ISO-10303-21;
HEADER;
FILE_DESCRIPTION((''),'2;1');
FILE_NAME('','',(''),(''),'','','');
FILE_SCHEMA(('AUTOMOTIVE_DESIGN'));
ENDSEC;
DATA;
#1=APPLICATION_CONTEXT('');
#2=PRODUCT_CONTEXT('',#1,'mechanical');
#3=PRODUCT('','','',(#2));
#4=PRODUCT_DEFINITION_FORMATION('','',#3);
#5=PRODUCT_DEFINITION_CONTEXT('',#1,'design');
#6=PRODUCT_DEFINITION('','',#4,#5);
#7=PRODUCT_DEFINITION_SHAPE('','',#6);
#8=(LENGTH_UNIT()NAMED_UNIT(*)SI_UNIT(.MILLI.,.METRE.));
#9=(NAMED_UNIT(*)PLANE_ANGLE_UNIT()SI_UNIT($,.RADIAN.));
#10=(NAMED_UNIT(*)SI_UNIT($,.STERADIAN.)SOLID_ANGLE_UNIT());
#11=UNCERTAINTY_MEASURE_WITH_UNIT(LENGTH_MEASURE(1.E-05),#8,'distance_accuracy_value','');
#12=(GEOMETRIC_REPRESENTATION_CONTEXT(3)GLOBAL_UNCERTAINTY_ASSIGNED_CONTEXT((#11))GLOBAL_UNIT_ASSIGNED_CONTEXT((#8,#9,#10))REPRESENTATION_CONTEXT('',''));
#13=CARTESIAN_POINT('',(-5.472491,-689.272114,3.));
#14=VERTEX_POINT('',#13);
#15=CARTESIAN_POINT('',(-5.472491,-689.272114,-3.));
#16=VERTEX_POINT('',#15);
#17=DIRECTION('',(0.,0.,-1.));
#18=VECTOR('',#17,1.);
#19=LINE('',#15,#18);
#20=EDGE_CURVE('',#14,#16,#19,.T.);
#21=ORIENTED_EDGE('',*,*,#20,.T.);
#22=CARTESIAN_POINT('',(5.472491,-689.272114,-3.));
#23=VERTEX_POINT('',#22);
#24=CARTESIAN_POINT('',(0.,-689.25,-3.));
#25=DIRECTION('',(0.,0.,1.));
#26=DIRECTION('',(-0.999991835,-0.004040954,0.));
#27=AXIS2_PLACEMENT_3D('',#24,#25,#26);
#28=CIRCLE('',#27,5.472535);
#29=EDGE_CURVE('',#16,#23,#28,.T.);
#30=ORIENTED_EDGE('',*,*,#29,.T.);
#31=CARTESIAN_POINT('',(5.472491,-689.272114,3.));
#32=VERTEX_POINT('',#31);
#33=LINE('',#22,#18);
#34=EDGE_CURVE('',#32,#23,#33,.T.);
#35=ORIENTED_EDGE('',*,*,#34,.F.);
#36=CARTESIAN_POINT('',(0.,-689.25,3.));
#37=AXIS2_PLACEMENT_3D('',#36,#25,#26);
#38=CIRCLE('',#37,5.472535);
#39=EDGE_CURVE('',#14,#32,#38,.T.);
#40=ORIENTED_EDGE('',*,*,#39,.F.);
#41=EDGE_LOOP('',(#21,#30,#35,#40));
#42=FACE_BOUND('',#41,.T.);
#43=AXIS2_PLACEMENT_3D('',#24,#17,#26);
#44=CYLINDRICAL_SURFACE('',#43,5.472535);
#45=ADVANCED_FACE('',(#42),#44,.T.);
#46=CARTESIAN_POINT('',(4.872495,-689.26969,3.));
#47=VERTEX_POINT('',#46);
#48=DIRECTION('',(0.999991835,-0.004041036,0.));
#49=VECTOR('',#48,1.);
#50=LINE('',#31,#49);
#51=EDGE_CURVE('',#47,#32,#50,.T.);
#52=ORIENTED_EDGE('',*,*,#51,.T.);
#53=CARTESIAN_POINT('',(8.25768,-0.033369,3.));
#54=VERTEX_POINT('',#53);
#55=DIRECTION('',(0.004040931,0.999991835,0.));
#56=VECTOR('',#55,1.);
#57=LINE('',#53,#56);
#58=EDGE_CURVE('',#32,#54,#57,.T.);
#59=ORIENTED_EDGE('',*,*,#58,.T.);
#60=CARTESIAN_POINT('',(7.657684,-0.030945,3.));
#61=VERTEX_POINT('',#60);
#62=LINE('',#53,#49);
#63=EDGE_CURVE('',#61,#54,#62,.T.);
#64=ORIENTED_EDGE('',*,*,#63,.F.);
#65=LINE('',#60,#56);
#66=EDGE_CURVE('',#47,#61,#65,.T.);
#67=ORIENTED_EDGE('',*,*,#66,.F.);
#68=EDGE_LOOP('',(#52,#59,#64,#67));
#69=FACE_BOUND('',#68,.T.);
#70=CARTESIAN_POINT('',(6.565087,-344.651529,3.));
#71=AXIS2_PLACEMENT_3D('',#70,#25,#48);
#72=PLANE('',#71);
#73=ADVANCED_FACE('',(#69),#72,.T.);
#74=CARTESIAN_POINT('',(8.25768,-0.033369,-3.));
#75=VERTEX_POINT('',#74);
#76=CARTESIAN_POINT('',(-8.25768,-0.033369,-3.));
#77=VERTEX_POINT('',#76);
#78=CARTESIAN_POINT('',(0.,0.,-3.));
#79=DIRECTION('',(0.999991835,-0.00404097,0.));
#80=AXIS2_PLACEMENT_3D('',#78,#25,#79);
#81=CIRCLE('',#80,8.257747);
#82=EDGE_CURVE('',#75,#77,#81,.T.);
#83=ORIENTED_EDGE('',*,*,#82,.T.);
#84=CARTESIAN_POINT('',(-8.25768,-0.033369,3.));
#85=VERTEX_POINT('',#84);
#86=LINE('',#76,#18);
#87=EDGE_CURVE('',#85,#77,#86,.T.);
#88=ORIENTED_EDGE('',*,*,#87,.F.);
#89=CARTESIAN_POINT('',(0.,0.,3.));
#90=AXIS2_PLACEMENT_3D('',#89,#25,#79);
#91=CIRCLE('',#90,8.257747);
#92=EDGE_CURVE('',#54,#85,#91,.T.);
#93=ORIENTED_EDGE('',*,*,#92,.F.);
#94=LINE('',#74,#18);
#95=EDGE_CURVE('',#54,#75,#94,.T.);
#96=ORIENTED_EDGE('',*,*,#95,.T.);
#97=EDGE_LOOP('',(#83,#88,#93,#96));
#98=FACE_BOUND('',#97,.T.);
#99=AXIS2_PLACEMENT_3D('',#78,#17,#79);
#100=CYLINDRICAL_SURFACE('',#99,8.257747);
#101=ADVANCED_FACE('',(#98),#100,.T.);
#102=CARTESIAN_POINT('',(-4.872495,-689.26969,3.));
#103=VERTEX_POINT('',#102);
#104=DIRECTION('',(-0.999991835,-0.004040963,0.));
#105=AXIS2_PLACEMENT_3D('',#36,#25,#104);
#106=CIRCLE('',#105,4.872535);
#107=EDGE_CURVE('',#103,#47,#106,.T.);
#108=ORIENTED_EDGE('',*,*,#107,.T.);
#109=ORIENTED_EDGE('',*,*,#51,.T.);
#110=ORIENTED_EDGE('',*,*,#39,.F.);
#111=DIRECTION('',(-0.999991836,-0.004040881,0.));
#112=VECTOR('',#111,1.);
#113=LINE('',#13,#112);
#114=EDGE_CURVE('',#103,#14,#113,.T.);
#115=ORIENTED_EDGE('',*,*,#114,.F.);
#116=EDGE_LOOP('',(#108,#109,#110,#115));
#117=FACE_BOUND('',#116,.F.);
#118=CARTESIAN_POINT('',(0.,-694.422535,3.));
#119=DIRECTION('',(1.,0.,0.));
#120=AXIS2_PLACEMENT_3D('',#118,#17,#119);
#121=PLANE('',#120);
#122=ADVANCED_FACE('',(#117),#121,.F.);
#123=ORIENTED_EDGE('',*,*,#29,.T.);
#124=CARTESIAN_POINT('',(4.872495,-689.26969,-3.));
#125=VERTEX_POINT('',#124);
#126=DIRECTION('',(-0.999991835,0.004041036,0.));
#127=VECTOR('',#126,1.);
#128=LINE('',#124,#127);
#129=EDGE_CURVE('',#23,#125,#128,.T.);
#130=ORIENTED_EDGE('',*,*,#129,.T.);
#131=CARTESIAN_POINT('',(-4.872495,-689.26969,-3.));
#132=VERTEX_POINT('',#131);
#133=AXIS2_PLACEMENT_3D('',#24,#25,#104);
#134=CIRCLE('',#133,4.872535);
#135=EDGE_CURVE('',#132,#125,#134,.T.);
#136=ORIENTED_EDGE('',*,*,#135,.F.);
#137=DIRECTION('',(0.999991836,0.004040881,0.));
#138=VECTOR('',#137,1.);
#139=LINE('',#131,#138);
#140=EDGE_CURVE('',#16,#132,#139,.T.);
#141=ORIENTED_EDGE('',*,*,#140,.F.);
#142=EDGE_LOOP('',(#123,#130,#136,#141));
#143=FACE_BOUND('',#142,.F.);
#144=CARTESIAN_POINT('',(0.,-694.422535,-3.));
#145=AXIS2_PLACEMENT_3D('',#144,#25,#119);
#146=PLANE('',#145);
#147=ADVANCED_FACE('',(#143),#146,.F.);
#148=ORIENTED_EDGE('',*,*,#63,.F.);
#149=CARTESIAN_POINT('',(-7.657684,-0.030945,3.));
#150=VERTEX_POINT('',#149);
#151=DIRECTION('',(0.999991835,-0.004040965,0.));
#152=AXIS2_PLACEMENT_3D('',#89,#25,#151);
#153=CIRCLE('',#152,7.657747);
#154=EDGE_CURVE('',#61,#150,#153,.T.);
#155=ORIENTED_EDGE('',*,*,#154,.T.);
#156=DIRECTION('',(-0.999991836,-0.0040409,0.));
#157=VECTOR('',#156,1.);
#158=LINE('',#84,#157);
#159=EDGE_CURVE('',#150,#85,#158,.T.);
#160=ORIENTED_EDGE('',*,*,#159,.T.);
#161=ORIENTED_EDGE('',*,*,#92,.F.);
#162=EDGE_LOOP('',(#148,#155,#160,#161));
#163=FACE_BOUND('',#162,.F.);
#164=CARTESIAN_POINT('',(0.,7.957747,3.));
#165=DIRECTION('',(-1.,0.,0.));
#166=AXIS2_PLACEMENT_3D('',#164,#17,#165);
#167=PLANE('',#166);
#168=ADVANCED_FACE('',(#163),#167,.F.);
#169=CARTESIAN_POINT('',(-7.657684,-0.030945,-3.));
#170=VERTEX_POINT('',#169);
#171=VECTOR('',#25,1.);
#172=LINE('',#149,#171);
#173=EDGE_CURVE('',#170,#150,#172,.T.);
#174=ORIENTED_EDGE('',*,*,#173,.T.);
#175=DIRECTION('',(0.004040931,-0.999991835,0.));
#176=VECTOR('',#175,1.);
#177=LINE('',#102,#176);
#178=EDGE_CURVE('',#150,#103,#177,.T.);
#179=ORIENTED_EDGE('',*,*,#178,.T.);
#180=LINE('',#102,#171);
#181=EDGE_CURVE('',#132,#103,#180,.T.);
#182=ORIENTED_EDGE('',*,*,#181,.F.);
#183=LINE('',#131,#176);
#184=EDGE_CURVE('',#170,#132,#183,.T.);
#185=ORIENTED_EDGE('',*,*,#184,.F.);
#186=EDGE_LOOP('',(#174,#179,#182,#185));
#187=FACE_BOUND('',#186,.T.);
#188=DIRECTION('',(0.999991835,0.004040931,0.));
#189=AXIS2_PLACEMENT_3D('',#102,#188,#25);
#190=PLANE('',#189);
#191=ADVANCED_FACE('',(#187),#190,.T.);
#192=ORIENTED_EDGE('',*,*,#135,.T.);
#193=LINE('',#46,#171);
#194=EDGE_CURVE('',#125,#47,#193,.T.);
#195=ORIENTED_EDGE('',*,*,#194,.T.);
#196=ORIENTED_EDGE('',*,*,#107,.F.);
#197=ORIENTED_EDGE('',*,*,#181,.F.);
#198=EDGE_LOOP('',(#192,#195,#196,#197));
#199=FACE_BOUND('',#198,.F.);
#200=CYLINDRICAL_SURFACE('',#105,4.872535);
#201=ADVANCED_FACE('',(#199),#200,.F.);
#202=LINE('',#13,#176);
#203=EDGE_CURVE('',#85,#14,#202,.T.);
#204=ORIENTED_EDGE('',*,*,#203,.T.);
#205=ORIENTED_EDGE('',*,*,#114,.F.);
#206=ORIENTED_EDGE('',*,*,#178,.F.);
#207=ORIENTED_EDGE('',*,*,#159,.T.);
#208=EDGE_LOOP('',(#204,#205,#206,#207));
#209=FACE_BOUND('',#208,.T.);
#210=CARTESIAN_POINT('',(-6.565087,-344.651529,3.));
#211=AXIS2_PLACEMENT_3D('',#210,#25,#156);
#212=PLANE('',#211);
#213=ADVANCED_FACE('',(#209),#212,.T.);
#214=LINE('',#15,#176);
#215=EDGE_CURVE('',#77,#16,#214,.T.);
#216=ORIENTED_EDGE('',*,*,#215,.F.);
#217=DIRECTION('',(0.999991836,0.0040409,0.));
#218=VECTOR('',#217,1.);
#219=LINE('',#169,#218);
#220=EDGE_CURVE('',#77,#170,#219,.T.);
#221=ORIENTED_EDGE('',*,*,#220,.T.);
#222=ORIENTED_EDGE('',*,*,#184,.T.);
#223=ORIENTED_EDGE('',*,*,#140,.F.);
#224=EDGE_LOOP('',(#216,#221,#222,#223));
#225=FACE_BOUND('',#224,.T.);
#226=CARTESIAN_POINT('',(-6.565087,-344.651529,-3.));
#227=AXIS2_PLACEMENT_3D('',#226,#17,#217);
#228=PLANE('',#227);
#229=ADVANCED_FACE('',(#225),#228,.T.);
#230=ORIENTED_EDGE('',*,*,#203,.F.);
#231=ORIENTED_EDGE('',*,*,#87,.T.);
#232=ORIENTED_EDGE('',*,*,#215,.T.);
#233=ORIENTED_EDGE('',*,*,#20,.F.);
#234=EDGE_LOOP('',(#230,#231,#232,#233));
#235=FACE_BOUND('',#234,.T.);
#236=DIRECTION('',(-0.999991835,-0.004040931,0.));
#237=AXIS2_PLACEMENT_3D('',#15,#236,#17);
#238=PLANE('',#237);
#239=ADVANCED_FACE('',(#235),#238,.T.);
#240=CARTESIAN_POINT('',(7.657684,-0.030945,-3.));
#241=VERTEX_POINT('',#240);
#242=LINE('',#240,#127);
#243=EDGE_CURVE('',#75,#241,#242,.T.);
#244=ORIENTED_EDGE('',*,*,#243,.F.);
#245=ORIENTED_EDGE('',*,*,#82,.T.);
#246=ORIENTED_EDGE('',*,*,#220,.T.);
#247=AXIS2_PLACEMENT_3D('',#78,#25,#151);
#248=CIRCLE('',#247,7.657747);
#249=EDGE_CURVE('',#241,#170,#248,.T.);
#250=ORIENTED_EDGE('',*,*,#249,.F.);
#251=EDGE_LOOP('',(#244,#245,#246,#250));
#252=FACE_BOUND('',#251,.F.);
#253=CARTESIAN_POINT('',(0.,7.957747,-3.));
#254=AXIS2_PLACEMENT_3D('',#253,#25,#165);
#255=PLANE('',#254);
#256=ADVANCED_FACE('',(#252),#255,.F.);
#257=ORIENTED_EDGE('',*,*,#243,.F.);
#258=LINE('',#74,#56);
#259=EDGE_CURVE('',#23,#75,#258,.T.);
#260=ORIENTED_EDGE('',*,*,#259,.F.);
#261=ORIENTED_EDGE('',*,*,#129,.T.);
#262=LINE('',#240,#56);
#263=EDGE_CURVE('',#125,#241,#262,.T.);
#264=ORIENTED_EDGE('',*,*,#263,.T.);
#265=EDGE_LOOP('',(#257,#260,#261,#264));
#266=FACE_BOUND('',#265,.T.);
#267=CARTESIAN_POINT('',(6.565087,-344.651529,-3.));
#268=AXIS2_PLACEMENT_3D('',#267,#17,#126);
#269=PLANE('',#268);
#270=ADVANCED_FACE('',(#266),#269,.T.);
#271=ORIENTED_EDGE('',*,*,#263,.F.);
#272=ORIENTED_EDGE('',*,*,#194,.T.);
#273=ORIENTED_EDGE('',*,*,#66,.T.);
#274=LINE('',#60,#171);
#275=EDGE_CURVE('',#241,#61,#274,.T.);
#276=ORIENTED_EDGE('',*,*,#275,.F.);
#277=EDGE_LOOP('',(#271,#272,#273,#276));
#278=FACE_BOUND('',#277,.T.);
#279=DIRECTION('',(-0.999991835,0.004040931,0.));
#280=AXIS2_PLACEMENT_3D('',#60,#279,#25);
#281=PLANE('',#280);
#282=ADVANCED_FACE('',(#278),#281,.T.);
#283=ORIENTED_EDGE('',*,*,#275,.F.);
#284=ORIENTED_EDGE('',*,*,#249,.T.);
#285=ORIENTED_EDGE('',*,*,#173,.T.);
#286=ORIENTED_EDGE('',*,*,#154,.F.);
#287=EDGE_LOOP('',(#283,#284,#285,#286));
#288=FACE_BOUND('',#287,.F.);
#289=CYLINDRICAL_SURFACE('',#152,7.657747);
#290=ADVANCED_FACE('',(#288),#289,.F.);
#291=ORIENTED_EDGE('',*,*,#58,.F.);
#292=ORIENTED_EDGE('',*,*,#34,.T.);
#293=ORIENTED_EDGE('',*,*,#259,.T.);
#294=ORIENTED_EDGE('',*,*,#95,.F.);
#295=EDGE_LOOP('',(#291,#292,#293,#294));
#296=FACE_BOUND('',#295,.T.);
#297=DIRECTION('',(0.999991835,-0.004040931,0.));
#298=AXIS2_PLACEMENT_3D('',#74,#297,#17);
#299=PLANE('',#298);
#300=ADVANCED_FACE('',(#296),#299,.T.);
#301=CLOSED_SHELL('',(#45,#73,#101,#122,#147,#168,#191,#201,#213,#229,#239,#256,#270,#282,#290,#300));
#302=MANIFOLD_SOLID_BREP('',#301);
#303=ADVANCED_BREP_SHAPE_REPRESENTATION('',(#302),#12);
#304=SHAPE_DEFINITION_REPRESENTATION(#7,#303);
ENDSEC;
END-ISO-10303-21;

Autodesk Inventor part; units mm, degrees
sketch "Chemin d'esquisse" plane through (0, 0, 0) normal (0, 0, 1) x (1, 0, 0)
  arc A0 (7.957682, -0.032157) -> (-7.957682, -0.032157) centre (0, 0) ccw
  arc A1 (-5.172493, -689.270902) -> (5.172493, -689.270902) centre (0, -689.25) ccw
  line L0 (-5.172493, -689.270902) -> (-7.957682, -0.032157)
  line L1 (7.957682, -0.032157) -> (5.172493, -689.270902)
ref_plane "Plan de section" through (-7.957682, -0.032157, 0) normal (0.0040409, -0.9999918, 0) x (0, 0, 1)
ref_plane "Plan de construction2" through (0, 0, 0) normal (-1, 0, 0) x (0, 0, 1)
ref_plane "Plan de construction3" through (0, -689.25, 0) normal (0.1434124, 0.989663, 0) x (0, 0, 1)
sketch "Section" plane through (-7.957682, -0.032157, 0) normal (0.0040409, -0.9999918, 0) x (0, 0, 1)
  line L0 (-3, 0.3) -> (3, 0.3)
  line L1 (3, 0.3) -> (3, -0.3)
  line L2 (3, -0.3) -> (-3, -0.3)
  line L3 (-3, -0.3) -> (-3, 0.3)
  line L4 (-3, 0) -> (3, 0) construction
  point P0 (0, 0)
  point P1 (0, 0)
  dimension "d0" = 6
  dimension "d4" = 0.3
  dimension "d5" = 0.3
sweep "Courroie" add profiles "Section" path "Chemin d'esquisse"
equation "\"d0\" = da_B"
equation "\"d4\" = da_a"
equation "\"d5\" = da_a2"
equation "\"da_B\" = 6"
equation "\"da_pb\" = 2.5"
equation "\"da_L\" = 1419.76125"
equation "\"da_a\" = 0.3"
equation "\"da_S\" = 1.5"
equation "\"da_Beta\" = 20deg"
equation "\"da_Ht\" = 0.7"
equation "\"da_H\" = 1.3"
equation "\"da_a2\" = 0.3"
properties part number "Courroie synchrone" material "Caoutchouc"
